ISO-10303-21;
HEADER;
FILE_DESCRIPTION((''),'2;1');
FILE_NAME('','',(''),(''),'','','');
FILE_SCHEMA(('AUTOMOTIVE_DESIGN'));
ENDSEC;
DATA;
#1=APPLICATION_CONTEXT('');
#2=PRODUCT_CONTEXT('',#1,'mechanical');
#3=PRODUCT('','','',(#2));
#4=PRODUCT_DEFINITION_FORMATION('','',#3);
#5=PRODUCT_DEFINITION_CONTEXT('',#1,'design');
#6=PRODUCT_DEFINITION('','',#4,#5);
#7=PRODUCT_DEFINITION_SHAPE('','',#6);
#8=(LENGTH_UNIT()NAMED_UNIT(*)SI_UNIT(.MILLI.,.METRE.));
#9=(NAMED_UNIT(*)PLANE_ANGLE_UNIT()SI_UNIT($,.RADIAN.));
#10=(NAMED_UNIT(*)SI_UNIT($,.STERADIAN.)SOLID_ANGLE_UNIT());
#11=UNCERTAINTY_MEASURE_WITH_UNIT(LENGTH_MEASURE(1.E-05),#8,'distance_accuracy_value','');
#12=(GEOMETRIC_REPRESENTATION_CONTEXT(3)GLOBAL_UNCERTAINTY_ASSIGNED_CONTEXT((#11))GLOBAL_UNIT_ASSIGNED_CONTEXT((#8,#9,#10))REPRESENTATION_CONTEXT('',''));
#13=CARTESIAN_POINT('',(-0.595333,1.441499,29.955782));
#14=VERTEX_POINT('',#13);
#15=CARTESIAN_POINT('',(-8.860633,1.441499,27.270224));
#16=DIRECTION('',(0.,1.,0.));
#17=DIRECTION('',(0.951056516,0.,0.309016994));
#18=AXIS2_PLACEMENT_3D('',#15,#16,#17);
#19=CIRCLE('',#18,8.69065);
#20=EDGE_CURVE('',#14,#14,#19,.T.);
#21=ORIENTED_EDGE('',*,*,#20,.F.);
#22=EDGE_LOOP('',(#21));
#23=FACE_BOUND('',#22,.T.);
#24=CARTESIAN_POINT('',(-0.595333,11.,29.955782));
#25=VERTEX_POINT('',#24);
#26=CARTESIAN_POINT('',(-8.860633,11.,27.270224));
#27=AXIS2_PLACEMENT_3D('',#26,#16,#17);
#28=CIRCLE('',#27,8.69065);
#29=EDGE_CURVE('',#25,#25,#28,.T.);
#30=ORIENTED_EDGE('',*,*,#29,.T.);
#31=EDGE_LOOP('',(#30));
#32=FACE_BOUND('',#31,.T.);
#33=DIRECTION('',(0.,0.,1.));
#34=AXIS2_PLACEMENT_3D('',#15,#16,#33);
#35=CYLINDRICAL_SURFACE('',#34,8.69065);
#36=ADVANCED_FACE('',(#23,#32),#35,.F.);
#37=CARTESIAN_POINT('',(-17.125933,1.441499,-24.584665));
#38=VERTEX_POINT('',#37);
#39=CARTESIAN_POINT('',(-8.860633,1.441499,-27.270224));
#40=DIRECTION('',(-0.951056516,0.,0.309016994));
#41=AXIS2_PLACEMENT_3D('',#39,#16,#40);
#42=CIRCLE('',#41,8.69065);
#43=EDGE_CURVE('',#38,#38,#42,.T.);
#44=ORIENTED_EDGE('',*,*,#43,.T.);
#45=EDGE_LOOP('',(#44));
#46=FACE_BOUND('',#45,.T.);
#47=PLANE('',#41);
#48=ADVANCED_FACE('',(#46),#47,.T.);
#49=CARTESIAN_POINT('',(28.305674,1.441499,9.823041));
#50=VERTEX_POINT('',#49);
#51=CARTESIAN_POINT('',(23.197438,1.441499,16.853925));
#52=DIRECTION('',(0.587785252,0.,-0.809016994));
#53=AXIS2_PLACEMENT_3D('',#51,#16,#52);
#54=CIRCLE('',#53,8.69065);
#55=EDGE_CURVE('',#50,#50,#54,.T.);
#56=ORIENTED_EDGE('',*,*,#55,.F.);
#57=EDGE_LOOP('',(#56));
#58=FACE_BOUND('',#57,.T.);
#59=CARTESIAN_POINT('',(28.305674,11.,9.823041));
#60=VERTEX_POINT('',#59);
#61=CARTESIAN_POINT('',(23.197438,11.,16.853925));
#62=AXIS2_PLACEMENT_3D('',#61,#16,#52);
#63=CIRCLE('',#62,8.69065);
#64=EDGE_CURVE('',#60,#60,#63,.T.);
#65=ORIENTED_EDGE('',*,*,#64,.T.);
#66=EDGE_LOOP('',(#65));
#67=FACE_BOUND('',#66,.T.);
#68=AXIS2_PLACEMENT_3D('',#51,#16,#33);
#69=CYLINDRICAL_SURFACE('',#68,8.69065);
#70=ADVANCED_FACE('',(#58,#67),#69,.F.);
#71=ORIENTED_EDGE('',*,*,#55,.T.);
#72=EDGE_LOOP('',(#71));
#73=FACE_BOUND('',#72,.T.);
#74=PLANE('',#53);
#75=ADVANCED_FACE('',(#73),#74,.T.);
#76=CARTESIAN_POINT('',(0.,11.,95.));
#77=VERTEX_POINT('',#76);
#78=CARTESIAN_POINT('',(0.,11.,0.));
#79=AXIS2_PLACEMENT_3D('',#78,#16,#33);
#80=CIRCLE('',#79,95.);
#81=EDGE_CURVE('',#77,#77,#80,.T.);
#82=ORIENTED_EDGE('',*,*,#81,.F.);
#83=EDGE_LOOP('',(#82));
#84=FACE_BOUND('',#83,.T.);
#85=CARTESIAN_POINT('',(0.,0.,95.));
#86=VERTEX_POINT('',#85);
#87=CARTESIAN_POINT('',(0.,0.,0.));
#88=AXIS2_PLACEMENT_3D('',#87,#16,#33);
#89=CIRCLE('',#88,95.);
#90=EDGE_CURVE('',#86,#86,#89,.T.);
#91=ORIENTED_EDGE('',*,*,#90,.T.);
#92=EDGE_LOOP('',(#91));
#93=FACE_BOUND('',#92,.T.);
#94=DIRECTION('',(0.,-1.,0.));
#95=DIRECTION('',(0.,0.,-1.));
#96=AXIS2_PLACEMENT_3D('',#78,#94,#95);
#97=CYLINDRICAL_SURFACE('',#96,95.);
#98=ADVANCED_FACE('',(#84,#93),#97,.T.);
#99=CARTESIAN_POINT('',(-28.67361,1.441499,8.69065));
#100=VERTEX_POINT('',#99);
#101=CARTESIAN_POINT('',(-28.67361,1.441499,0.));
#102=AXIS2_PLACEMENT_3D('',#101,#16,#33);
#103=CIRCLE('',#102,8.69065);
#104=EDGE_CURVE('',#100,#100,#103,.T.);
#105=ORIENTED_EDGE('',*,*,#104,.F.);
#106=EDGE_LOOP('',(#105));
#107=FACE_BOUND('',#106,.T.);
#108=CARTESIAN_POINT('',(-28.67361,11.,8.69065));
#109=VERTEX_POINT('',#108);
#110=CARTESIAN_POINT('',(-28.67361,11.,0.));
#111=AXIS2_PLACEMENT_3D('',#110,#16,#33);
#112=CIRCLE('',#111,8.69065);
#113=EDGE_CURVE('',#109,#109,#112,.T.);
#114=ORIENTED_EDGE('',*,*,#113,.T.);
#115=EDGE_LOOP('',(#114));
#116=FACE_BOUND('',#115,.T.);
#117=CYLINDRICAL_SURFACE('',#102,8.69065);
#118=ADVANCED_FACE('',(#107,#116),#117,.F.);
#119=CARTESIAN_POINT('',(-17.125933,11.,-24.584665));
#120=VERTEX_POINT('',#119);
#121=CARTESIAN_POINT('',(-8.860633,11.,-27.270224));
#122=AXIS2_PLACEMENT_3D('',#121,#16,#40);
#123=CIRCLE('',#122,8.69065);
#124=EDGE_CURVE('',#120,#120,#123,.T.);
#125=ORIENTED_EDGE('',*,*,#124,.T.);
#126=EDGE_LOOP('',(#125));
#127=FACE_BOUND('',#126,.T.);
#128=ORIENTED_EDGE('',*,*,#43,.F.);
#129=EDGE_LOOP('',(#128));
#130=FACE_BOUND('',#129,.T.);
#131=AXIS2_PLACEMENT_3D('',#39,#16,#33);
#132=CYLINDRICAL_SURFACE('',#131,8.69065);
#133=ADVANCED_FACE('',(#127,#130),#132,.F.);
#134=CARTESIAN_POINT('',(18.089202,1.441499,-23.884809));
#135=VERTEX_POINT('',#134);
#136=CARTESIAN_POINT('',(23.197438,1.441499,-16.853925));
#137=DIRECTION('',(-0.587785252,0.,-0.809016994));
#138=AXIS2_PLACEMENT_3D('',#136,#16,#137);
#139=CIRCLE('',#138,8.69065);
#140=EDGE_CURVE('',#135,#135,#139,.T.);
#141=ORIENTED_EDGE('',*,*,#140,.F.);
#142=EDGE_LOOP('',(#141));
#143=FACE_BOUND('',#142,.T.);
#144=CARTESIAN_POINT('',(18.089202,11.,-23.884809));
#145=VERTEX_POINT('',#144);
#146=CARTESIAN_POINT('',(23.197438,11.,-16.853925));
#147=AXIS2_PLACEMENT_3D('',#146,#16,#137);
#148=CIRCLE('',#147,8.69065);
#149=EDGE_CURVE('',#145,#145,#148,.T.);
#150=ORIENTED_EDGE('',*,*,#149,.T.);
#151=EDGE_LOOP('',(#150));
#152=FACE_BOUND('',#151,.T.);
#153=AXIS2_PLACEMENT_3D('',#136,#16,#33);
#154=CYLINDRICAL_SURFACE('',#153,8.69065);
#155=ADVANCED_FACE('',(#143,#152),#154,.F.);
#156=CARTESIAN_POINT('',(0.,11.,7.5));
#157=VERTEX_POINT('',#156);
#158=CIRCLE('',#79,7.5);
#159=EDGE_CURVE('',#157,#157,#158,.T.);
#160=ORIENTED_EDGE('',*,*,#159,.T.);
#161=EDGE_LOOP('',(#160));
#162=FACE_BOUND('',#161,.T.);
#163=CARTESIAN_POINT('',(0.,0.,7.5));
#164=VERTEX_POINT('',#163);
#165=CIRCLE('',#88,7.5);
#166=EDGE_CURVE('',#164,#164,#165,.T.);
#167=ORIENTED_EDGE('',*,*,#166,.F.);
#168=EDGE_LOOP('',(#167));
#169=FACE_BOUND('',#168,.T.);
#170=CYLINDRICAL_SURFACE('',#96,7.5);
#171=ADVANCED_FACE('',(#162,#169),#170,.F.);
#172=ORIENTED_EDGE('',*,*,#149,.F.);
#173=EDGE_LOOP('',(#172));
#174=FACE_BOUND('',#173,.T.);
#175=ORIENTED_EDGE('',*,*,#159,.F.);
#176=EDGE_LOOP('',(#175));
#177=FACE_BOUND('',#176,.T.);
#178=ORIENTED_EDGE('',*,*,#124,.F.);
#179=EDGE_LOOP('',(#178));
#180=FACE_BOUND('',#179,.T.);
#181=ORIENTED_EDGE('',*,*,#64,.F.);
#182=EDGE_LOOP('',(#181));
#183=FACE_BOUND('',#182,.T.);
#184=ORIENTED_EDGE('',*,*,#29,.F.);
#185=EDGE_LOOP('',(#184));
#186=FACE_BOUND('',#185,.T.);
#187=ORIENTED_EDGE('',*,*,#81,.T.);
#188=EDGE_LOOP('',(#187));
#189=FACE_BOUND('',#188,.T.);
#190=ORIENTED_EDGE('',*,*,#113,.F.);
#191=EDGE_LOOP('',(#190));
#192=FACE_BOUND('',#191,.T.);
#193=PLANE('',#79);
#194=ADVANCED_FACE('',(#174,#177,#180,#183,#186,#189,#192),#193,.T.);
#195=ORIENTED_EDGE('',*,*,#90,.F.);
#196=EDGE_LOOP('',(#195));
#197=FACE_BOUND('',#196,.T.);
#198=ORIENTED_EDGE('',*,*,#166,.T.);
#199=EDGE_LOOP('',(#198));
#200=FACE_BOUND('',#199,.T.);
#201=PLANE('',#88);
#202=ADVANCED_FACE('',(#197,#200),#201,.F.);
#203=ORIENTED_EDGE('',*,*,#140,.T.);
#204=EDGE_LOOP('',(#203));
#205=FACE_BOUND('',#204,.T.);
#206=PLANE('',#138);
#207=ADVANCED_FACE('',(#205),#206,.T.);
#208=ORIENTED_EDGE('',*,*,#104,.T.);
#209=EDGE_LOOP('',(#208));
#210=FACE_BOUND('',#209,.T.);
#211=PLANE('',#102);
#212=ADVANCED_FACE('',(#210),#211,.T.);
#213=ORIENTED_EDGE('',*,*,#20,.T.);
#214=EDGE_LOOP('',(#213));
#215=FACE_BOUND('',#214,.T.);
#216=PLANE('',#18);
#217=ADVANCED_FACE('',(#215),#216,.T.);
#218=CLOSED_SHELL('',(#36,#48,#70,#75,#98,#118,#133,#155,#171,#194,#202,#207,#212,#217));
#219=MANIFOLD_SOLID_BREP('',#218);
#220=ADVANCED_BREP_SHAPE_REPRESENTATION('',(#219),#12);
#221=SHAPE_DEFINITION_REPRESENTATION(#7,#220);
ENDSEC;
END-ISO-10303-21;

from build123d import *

# Parameters (mm, degrees)
SKETCH1_R           = 95
BOSS_EXTRUDE1_DEPTH = 11
SKETCH2_R           = 7.5
CUT_EXTRUDE1_DEPTH  = 135.799851632
SKETCH3_R           = 8.690650408
CUT_EXTRUDE2_DEPTH  = 9.558500742
CIRPATTERN1_COUNT   = 5


with BuildPart() as part:
    # Sketch1 → Boss-Extrude1 (new body)
    with BuildSketch(Plane(origin=(0, 0, 0), x_dir=(1, 0, 0), z_dir=(0, 1, 0))):
        Circle(SKETCH1_R)
    extrude(amount=BOSS_EXTRUDE1_DEPTH)

    # Sketch2 → Cut-Extrude1 (cut, through all)
    with BuildSketch(Plane(origin=(0, 0, 0), x_dir=(1, 0, 0), z_dir=(0, 1, 0))):
        Circle(SKETCH2_R)
    extrude(amount=CUT_EXTRUDE1_DEPTH, mode=Mode.SUBTRACT)

    # Sketch3 → Cut-Extrude2 (cut)
    with BuildSketch(Plane(origin=(0, 11, 0), x_dir=(1, 0, 0), z_dir=(0, 1, 0))):
        with Locations((-28.673610098, 0)):
            Circle(SKETCH3_R)
    cut_extrude2 = extrude(amount=-CUT_EXTRUDE2_DEPTH, mode=Mode.SUBTRACT)

    # CirPattern1: Cut-Extrude2 ×5 about axis
    cirpattern1_axis = Axis((0, 0, 0), (0, 1, 0))
    for i in range(1, CIRPATTERN1_COUNT):
        add(cut_extrude2.rotate(cirpattern1_axis, i * 360 / CIRPATTERN1_COUNT), mode=Mode.SUBTRACT)


solid = part.part
